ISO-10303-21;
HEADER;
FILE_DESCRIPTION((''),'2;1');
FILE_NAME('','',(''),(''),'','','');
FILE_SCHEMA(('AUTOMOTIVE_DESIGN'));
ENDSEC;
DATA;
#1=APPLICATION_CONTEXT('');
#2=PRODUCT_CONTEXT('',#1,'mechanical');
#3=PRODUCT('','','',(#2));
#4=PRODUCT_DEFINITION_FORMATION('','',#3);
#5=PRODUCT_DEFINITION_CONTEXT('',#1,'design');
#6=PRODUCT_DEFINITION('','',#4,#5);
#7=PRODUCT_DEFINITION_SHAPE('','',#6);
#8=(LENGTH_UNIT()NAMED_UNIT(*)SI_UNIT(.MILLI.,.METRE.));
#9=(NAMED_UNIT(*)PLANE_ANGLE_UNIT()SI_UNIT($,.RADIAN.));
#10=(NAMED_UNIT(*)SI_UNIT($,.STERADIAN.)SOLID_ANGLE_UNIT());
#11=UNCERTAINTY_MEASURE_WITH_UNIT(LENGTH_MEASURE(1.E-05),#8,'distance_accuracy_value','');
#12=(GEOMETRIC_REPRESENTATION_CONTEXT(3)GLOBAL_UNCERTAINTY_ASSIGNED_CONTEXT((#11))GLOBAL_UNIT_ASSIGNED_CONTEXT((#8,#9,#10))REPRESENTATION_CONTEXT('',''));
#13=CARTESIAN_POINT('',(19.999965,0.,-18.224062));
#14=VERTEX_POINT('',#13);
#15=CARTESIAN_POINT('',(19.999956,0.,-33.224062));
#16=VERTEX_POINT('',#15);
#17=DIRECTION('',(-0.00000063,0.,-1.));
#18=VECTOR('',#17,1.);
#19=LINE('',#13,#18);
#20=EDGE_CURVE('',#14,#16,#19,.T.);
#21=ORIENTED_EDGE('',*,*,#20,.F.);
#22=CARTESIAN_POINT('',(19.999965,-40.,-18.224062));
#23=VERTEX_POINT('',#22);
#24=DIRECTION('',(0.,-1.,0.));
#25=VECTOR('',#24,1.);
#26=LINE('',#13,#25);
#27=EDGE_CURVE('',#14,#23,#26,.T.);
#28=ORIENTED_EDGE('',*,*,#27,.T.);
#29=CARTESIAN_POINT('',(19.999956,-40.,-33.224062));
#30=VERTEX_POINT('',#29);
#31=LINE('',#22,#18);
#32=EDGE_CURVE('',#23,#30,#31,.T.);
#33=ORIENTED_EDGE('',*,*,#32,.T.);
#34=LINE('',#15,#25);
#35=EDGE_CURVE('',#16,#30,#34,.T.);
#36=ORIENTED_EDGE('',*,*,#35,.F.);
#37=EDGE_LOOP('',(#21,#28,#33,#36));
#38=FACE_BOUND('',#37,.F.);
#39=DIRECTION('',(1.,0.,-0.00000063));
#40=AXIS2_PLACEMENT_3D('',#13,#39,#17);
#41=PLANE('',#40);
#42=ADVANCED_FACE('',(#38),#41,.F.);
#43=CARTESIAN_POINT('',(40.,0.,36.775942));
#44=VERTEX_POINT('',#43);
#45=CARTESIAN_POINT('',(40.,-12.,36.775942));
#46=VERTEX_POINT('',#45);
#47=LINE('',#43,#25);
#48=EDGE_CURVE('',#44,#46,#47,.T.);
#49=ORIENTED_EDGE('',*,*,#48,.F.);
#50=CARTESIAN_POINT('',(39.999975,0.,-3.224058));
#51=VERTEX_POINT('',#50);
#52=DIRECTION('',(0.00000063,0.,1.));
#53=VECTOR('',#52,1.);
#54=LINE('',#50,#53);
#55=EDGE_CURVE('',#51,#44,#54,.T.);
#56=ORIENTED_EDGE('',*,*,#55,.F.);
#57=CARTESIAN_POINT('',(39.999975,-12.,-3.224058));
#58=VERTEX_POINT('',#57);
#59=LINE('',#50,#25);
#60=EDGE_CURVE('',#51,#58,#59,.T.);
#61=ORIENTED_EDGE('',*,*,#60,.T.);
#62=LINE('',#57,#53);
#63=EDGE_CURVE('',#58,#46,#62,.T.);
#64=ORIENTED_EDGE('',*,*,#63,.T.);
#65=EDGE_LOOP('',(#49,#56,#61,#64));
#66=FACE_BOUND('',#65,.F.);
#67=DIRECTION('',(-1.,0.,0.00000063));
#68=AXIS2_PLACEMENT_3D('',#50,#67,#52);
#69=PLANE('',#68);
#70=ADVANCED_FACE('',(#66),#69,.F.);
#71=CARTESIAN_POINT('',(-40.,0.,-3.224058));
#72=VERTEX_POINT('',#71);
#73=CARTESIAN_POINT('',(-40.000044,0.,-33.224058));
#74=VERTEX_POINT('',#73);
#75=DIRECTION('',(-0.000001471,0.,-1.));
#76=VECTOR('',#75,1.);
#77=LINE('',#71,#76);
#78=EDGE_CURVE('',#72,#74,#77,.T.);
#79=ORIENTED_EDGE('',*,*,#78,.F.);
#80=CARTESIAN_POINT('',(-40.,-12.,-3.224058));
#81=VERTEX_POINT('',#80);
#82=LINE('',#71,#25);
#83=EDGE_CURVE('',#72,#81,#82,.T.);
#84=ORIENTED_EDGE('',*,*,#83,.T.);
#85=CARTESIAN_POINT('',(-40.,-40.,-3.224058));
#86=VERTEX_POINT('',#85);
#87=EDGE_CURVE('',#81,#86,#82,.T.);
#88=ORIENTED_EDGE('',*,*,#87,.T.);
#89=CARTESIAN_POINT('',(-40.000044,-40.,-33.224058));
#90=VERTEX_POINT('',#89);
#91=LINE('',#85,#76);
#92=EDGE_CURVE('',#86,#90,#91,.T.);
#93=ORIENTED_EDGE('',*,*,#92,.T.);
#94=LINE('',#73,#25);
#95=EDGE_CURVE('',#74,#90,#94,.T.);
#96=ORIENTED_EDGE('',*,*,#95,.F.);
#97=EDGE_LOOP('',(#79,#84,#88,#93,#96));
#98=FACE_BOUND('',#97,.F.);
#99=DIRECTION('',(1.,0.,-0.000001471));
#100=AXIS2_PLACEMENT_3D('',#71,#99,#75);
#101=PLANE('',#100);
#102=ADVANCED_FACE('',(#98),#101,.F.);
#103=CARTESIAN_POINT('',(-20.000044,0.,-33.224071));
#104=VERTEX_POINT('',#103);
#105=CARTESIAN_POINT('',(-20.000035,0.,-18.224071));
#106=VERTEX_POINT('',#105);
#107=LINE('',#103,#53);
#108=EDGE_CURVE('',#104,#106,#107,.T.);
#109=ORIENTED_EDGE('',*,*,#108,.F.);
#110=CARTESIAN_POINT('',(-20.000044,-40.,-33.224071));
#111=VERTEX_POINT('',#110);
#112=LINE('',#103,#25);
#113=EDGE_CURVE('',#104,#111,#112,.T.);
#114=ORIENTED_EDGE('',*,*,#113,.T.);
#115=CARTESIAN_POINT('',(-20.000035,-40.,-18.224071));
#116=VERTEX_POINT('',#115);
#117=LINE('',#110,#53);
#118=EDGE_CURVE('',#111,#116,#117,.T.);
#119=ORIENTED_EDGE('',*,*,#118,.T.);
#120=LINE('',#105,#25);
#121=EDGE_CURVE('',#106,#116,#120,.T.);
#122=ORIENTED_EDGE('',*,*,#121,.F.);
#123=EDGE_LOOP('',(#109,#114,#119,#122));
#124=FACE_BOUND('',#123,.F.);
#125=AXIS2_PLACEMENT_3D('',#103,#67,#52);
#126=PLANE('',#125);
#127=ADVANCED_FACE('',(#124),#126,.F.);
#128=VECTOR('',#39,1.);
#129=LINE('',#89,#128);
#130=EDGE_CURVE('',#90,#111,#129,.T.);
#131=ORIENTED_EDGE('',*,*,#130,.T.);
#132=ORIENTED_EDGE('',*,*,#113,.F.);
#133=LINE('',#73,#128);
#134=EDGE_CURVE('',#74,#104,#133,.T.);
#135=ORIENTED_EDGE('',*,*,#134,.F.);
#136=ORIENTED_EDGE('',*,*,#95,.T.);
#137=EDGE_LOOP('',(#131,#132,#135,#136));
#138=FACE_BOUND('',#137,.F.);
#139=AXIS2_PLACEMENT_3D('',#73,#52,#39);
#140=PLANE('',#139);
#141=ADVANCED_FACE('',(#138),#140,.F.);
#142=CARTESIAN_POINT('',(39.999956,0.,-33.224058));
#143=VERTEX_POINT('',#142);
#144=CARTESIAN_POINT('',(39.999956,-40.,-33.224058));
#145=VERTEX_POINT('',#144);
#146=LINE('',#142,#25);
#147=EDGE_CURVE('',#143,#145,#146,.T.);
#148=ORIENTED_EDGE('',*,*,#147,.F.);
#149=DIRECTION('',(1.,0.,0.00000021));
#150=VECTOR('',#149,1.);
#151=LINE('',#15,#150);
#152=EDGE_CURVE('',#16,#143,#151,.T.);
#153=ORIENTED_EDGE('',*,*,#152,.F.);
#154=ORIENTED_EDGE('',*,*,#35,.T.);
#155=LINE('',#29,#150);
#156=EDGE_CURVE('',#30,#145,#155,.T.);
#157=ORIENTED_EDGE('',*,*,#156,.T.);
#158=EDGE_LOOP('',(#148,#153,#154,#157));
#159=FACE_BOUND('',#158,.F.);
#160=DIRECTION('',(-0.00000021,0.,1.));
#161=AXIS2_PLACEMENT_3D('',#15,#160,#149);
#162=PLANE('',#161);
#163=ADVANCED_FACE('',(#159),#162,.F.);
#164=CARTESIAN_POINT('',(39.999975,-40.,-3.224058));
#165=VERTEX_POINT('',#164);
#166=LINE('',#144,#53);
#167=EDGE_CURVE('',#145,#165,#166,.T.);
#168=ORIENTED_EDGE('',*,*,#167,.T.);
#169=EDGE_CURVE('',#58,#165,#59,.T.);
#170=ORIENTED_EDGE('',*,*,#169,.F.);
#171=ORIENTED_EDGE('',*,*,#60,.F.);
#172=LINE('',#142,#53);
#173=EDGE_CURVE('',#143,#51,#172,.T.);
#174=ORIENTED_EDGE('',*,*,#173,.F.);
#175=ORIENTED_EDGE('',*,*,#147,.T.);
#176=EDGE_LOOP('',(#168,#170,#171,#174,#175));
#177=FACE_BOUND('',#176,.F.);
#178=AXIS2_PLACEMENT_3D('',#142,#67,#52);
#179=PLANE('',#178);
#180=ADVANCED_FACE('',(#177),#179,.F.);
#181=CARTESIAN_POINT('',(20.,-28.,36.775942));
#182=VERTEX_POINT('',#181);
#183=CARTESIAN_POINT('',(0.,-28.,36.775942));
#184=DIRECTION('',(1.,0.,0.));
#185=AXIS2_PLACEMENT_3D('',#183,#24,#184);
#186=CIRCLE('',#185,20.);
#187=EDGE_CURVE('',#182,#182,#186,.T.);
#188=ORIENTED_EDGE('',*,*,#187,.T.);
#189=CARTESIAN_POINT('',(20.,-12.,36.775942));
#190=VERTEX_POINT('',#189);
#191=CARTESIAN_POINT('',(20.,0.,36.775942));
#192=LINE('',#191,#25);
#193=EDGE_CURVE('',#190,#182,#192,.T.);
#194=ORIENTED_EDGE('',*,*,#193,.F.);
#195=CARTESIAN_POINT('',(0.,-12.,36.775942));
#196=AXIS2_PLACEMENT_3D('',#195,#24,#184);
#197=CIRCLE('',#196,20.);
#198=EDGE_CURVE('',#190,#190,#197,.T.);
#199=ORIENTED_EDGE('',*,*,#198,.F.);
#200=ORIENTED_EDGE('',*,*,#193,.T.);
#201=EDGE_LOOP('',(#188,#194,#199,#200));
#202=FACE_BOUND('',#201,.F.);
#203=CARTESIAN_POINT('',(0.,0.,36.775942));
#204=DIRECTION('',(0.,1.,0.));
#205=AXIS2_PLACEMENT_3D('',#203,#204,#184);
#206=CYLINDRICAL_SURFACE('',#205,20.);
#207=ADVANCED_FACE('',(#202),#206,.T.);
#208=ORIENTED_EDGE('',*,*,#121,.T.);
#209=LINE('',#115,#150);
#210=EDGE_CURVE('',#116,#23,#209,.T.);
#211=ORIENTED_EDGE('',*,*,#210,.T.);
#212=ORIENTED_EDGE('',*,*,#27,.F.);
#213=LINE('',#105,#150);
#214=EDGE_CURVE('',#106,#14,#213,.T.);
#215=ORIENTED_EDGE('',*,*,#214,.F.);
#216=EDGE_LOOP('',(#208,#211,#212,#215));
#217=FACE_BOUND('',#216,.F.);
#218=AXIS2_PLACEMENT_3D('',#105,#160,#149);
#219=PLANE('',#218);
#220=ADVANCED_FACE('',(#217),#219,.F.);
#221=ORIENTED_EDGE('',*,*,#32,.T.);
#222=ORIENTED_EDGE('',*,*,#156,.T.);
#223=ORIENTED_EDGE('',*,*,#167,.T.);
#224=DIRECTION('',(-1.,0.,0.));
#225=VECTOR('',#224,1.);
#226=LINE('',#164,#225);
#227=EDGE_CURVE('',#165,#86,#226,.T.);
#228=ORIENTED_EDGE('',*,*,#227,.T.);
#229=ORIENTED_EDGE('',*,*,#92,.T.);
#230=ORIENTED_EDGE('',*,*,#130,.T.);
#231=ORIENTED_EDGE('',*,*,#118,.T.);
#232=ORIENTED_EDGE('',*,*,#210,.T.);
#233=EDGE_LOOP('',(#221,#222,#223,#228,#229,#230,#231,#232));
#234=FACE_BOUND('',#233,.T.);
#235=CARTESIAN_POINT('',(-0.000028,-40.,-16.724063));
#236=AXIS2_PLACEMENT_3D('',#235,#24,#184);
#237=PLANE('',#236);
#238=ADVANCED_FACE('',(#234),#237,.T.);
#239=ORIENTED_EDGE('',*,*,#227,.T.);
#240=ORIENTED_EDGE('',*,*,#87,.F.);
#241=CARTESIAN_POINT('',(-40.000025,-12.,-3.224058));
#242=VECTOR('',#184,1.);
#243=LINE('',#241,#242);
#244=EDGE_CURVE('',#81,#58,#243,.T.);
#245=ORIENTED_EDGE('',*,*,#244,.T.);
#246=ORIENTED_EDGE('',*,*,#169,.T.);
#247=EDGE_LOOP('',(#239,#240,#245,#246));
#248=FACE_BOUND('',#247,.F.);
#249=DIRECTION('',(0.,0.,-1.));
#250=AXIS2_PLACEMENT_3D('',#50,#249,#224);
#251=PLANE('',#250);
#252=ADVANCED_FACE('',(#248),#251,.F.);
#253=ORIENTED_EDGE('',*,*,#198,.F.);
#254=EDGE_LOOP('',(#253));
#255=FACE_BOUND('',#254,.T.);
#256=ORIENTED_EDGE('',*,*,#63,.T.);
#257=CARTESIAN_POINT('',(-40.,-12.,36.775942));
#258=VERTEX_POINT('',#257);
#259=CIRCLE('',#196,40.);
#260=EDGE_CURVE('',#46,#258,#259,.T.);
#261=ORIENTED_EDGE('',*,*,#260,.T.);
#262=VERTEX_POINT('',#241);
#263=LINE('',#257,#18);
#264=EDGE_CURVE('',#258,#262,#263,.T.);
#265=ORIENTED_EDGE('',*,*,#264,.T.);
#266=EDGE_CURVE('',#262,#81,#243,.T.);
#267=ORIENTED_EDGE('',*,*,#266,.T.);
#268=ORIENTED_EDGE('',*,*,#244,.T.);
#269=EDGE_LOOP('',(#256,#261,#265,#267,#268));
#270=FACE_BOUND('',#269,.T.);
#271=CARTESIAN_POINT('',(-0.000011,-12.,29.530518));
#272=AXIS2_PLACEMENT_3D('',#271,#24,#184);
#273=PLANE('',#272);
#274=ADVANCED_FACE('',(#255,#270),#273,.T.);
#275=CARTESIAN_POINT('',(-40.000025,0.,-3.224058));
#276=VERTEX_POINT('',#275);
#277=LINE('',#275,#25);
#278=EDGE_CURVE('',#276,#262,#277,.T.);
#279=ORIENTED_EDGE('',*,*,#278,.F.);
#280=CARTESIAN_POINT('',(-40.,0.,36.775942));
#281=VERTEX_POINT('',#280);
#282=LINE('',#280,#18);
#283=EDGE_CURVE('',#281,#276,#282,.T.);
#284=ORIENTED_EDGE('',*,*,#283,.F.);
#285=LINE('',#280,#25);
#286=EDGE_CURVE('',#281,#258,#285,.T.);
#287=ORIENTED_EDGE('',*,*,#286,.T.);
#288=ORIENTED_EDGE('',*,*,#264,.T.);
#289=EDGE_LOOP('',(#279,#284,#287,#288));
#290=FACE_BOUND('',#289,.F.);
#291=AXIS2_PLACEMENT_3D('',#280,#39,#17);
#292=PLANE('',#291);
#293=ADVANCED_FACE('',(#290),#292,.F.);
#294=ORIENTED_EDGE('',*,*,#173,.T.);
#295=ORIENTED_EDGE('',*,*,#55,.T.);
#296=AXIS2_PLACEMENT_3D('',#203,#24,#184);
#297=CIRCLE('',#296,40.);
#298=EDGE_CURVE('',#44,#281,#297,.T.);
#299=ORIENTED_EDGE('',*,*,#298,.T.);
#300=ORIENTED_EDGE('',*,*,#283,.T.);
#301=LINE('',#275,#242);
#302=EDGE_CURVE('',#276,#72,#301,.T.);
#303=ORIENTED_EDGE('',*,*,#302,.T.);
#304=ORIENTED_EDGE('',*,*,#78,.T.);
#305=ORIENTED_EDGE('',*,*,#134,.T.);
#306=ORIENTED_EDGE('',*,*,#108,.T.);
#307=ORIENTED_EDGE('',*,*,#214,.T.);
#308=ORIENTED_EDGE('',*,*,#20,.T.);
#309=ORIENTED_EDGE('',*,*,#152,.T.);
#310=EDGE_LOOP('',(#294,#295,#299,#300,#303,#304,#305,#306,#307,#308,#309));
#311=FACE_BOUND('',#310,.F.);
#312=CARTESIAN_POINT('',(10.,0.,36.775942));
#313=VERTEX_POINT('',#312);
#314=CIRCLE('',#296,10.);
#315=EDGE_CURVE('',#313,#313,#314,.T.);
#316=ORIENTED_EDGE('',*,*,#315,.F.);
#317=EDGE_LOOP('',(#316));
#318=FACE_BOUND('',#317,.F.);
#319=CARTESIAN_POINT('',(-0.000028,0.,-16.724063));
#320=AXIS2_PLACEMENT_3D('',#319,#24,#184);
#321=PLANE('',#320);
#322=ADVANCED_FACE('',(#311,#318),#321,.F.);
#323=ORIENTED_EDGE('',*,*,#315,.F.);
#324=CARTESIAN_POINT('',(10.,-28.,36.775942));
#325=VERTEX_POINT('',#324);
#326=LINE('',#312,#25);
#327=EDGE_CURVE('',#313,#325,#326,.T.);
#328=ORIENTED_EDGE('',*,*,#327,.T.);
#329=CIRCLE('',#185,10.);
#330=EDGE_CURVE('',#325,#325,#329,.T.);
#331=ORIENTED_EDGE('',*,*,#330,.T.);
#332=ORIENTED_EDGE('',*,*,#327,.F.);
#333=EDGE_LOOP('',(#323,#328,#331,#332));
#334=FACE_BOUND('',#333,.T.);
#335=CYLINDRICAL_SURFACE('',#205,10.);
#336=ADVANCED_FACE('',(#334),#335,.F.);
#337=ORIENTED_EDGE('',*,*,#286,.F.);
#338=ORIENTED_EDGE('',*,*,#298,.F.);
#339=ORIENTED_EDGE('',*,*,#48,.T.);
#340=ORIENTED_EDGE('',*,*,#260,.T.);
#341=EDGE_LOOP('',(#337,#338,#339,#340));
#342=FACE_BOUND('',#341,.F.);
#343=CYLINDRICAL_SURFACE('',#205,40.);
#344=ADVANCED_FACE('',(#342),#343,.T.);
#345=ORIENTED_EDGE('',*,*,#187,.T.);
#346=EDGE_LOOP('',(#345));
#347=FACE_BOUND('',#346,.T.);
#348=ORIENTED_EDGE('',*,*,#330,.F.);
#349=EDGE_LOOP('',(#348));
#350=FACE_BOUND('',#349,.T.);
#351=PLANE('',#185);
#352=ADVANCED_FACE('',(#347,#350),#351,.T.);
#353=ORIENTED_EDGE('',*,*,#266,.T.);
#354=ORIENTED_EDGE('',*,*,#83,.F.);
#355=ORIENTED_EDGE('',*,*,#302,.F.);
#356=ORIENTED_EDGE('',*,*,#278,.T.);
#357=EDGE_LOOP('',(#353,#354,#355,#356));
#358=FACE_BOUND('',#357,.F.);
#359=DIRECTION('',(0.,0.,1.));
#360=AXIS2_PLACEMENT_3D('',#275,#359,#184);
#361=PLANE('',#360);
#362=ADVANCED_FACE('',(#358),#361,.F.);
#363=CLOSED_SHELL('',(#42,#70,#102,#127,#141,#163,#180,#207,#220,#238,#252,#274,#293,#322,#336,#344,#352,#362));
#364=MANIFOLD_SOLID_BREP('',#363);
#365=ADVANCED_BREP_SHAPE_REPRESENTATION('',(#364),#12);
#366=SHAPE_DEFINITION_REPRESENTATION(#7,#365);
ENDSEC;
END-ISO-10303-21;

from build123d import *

# Parameters (mm, degrees)
F0_R     = 20
F0_R_2   = 10
F1_DEPTH = 28
F2_DEPTH = 12
F3_DEPTH = 40


# Not quite as in the source:
# - ends of sketch curves that miss each other by under 0.0002 mm in the source are joined


with BuildPart() as f1:
    # F0 (on Front) → F1 (new body)
    with BuildSketch(Plane.XZ):
        with Locations((0, 36.7759418548)):
            Circle(F0_R)
        with Locations((0, 36.7759418548)):
            Circle(F0_R_2, mode=Mode.SUBTRACT)
    extrude(amount=F1_DEPTH)

    # F0 (on Front) → F2 (join)
    with BuildSketch(Plane.XZ):
        with BuildLine():
            ThreePointArc((40, 36.7759418548), (0, 76.7759418548), (-40, 36.7759418548))
            Line((-40, 36.7759418548), (-40.0000252162, -3.2240581452))
            Line((-40.0000252162, -3.2240581452), (39.9999747838, -3.2240581452))
            Line((39.9999747838, -3.2240581452), (40, 36.7759418548))
        make_face()
        with Locations((0, 36.7759418548)):
            Circle(F0_R, mode=Mode.SUBTRACT)
    extrude(amount=F2_DEPTH)

    # F0 (on Front) → F3 (join)
    with BuildSketch(Plane.XZ):
        Polygon((39.9999747838, -3.2240581452), (-40, -3.2240581452), (-40.0000441283, -33.2240581452), (-20.0000441283, -33.2240707533), (-20.0000346722, -18.2240707533), (19.9999653278, -18.2240623479), (19.9999558717, -33.2240623479), (39.9999558717, -33.2240581452), align=None)
    extrude(amount=F3_DEPTH)


solid = f1.part
